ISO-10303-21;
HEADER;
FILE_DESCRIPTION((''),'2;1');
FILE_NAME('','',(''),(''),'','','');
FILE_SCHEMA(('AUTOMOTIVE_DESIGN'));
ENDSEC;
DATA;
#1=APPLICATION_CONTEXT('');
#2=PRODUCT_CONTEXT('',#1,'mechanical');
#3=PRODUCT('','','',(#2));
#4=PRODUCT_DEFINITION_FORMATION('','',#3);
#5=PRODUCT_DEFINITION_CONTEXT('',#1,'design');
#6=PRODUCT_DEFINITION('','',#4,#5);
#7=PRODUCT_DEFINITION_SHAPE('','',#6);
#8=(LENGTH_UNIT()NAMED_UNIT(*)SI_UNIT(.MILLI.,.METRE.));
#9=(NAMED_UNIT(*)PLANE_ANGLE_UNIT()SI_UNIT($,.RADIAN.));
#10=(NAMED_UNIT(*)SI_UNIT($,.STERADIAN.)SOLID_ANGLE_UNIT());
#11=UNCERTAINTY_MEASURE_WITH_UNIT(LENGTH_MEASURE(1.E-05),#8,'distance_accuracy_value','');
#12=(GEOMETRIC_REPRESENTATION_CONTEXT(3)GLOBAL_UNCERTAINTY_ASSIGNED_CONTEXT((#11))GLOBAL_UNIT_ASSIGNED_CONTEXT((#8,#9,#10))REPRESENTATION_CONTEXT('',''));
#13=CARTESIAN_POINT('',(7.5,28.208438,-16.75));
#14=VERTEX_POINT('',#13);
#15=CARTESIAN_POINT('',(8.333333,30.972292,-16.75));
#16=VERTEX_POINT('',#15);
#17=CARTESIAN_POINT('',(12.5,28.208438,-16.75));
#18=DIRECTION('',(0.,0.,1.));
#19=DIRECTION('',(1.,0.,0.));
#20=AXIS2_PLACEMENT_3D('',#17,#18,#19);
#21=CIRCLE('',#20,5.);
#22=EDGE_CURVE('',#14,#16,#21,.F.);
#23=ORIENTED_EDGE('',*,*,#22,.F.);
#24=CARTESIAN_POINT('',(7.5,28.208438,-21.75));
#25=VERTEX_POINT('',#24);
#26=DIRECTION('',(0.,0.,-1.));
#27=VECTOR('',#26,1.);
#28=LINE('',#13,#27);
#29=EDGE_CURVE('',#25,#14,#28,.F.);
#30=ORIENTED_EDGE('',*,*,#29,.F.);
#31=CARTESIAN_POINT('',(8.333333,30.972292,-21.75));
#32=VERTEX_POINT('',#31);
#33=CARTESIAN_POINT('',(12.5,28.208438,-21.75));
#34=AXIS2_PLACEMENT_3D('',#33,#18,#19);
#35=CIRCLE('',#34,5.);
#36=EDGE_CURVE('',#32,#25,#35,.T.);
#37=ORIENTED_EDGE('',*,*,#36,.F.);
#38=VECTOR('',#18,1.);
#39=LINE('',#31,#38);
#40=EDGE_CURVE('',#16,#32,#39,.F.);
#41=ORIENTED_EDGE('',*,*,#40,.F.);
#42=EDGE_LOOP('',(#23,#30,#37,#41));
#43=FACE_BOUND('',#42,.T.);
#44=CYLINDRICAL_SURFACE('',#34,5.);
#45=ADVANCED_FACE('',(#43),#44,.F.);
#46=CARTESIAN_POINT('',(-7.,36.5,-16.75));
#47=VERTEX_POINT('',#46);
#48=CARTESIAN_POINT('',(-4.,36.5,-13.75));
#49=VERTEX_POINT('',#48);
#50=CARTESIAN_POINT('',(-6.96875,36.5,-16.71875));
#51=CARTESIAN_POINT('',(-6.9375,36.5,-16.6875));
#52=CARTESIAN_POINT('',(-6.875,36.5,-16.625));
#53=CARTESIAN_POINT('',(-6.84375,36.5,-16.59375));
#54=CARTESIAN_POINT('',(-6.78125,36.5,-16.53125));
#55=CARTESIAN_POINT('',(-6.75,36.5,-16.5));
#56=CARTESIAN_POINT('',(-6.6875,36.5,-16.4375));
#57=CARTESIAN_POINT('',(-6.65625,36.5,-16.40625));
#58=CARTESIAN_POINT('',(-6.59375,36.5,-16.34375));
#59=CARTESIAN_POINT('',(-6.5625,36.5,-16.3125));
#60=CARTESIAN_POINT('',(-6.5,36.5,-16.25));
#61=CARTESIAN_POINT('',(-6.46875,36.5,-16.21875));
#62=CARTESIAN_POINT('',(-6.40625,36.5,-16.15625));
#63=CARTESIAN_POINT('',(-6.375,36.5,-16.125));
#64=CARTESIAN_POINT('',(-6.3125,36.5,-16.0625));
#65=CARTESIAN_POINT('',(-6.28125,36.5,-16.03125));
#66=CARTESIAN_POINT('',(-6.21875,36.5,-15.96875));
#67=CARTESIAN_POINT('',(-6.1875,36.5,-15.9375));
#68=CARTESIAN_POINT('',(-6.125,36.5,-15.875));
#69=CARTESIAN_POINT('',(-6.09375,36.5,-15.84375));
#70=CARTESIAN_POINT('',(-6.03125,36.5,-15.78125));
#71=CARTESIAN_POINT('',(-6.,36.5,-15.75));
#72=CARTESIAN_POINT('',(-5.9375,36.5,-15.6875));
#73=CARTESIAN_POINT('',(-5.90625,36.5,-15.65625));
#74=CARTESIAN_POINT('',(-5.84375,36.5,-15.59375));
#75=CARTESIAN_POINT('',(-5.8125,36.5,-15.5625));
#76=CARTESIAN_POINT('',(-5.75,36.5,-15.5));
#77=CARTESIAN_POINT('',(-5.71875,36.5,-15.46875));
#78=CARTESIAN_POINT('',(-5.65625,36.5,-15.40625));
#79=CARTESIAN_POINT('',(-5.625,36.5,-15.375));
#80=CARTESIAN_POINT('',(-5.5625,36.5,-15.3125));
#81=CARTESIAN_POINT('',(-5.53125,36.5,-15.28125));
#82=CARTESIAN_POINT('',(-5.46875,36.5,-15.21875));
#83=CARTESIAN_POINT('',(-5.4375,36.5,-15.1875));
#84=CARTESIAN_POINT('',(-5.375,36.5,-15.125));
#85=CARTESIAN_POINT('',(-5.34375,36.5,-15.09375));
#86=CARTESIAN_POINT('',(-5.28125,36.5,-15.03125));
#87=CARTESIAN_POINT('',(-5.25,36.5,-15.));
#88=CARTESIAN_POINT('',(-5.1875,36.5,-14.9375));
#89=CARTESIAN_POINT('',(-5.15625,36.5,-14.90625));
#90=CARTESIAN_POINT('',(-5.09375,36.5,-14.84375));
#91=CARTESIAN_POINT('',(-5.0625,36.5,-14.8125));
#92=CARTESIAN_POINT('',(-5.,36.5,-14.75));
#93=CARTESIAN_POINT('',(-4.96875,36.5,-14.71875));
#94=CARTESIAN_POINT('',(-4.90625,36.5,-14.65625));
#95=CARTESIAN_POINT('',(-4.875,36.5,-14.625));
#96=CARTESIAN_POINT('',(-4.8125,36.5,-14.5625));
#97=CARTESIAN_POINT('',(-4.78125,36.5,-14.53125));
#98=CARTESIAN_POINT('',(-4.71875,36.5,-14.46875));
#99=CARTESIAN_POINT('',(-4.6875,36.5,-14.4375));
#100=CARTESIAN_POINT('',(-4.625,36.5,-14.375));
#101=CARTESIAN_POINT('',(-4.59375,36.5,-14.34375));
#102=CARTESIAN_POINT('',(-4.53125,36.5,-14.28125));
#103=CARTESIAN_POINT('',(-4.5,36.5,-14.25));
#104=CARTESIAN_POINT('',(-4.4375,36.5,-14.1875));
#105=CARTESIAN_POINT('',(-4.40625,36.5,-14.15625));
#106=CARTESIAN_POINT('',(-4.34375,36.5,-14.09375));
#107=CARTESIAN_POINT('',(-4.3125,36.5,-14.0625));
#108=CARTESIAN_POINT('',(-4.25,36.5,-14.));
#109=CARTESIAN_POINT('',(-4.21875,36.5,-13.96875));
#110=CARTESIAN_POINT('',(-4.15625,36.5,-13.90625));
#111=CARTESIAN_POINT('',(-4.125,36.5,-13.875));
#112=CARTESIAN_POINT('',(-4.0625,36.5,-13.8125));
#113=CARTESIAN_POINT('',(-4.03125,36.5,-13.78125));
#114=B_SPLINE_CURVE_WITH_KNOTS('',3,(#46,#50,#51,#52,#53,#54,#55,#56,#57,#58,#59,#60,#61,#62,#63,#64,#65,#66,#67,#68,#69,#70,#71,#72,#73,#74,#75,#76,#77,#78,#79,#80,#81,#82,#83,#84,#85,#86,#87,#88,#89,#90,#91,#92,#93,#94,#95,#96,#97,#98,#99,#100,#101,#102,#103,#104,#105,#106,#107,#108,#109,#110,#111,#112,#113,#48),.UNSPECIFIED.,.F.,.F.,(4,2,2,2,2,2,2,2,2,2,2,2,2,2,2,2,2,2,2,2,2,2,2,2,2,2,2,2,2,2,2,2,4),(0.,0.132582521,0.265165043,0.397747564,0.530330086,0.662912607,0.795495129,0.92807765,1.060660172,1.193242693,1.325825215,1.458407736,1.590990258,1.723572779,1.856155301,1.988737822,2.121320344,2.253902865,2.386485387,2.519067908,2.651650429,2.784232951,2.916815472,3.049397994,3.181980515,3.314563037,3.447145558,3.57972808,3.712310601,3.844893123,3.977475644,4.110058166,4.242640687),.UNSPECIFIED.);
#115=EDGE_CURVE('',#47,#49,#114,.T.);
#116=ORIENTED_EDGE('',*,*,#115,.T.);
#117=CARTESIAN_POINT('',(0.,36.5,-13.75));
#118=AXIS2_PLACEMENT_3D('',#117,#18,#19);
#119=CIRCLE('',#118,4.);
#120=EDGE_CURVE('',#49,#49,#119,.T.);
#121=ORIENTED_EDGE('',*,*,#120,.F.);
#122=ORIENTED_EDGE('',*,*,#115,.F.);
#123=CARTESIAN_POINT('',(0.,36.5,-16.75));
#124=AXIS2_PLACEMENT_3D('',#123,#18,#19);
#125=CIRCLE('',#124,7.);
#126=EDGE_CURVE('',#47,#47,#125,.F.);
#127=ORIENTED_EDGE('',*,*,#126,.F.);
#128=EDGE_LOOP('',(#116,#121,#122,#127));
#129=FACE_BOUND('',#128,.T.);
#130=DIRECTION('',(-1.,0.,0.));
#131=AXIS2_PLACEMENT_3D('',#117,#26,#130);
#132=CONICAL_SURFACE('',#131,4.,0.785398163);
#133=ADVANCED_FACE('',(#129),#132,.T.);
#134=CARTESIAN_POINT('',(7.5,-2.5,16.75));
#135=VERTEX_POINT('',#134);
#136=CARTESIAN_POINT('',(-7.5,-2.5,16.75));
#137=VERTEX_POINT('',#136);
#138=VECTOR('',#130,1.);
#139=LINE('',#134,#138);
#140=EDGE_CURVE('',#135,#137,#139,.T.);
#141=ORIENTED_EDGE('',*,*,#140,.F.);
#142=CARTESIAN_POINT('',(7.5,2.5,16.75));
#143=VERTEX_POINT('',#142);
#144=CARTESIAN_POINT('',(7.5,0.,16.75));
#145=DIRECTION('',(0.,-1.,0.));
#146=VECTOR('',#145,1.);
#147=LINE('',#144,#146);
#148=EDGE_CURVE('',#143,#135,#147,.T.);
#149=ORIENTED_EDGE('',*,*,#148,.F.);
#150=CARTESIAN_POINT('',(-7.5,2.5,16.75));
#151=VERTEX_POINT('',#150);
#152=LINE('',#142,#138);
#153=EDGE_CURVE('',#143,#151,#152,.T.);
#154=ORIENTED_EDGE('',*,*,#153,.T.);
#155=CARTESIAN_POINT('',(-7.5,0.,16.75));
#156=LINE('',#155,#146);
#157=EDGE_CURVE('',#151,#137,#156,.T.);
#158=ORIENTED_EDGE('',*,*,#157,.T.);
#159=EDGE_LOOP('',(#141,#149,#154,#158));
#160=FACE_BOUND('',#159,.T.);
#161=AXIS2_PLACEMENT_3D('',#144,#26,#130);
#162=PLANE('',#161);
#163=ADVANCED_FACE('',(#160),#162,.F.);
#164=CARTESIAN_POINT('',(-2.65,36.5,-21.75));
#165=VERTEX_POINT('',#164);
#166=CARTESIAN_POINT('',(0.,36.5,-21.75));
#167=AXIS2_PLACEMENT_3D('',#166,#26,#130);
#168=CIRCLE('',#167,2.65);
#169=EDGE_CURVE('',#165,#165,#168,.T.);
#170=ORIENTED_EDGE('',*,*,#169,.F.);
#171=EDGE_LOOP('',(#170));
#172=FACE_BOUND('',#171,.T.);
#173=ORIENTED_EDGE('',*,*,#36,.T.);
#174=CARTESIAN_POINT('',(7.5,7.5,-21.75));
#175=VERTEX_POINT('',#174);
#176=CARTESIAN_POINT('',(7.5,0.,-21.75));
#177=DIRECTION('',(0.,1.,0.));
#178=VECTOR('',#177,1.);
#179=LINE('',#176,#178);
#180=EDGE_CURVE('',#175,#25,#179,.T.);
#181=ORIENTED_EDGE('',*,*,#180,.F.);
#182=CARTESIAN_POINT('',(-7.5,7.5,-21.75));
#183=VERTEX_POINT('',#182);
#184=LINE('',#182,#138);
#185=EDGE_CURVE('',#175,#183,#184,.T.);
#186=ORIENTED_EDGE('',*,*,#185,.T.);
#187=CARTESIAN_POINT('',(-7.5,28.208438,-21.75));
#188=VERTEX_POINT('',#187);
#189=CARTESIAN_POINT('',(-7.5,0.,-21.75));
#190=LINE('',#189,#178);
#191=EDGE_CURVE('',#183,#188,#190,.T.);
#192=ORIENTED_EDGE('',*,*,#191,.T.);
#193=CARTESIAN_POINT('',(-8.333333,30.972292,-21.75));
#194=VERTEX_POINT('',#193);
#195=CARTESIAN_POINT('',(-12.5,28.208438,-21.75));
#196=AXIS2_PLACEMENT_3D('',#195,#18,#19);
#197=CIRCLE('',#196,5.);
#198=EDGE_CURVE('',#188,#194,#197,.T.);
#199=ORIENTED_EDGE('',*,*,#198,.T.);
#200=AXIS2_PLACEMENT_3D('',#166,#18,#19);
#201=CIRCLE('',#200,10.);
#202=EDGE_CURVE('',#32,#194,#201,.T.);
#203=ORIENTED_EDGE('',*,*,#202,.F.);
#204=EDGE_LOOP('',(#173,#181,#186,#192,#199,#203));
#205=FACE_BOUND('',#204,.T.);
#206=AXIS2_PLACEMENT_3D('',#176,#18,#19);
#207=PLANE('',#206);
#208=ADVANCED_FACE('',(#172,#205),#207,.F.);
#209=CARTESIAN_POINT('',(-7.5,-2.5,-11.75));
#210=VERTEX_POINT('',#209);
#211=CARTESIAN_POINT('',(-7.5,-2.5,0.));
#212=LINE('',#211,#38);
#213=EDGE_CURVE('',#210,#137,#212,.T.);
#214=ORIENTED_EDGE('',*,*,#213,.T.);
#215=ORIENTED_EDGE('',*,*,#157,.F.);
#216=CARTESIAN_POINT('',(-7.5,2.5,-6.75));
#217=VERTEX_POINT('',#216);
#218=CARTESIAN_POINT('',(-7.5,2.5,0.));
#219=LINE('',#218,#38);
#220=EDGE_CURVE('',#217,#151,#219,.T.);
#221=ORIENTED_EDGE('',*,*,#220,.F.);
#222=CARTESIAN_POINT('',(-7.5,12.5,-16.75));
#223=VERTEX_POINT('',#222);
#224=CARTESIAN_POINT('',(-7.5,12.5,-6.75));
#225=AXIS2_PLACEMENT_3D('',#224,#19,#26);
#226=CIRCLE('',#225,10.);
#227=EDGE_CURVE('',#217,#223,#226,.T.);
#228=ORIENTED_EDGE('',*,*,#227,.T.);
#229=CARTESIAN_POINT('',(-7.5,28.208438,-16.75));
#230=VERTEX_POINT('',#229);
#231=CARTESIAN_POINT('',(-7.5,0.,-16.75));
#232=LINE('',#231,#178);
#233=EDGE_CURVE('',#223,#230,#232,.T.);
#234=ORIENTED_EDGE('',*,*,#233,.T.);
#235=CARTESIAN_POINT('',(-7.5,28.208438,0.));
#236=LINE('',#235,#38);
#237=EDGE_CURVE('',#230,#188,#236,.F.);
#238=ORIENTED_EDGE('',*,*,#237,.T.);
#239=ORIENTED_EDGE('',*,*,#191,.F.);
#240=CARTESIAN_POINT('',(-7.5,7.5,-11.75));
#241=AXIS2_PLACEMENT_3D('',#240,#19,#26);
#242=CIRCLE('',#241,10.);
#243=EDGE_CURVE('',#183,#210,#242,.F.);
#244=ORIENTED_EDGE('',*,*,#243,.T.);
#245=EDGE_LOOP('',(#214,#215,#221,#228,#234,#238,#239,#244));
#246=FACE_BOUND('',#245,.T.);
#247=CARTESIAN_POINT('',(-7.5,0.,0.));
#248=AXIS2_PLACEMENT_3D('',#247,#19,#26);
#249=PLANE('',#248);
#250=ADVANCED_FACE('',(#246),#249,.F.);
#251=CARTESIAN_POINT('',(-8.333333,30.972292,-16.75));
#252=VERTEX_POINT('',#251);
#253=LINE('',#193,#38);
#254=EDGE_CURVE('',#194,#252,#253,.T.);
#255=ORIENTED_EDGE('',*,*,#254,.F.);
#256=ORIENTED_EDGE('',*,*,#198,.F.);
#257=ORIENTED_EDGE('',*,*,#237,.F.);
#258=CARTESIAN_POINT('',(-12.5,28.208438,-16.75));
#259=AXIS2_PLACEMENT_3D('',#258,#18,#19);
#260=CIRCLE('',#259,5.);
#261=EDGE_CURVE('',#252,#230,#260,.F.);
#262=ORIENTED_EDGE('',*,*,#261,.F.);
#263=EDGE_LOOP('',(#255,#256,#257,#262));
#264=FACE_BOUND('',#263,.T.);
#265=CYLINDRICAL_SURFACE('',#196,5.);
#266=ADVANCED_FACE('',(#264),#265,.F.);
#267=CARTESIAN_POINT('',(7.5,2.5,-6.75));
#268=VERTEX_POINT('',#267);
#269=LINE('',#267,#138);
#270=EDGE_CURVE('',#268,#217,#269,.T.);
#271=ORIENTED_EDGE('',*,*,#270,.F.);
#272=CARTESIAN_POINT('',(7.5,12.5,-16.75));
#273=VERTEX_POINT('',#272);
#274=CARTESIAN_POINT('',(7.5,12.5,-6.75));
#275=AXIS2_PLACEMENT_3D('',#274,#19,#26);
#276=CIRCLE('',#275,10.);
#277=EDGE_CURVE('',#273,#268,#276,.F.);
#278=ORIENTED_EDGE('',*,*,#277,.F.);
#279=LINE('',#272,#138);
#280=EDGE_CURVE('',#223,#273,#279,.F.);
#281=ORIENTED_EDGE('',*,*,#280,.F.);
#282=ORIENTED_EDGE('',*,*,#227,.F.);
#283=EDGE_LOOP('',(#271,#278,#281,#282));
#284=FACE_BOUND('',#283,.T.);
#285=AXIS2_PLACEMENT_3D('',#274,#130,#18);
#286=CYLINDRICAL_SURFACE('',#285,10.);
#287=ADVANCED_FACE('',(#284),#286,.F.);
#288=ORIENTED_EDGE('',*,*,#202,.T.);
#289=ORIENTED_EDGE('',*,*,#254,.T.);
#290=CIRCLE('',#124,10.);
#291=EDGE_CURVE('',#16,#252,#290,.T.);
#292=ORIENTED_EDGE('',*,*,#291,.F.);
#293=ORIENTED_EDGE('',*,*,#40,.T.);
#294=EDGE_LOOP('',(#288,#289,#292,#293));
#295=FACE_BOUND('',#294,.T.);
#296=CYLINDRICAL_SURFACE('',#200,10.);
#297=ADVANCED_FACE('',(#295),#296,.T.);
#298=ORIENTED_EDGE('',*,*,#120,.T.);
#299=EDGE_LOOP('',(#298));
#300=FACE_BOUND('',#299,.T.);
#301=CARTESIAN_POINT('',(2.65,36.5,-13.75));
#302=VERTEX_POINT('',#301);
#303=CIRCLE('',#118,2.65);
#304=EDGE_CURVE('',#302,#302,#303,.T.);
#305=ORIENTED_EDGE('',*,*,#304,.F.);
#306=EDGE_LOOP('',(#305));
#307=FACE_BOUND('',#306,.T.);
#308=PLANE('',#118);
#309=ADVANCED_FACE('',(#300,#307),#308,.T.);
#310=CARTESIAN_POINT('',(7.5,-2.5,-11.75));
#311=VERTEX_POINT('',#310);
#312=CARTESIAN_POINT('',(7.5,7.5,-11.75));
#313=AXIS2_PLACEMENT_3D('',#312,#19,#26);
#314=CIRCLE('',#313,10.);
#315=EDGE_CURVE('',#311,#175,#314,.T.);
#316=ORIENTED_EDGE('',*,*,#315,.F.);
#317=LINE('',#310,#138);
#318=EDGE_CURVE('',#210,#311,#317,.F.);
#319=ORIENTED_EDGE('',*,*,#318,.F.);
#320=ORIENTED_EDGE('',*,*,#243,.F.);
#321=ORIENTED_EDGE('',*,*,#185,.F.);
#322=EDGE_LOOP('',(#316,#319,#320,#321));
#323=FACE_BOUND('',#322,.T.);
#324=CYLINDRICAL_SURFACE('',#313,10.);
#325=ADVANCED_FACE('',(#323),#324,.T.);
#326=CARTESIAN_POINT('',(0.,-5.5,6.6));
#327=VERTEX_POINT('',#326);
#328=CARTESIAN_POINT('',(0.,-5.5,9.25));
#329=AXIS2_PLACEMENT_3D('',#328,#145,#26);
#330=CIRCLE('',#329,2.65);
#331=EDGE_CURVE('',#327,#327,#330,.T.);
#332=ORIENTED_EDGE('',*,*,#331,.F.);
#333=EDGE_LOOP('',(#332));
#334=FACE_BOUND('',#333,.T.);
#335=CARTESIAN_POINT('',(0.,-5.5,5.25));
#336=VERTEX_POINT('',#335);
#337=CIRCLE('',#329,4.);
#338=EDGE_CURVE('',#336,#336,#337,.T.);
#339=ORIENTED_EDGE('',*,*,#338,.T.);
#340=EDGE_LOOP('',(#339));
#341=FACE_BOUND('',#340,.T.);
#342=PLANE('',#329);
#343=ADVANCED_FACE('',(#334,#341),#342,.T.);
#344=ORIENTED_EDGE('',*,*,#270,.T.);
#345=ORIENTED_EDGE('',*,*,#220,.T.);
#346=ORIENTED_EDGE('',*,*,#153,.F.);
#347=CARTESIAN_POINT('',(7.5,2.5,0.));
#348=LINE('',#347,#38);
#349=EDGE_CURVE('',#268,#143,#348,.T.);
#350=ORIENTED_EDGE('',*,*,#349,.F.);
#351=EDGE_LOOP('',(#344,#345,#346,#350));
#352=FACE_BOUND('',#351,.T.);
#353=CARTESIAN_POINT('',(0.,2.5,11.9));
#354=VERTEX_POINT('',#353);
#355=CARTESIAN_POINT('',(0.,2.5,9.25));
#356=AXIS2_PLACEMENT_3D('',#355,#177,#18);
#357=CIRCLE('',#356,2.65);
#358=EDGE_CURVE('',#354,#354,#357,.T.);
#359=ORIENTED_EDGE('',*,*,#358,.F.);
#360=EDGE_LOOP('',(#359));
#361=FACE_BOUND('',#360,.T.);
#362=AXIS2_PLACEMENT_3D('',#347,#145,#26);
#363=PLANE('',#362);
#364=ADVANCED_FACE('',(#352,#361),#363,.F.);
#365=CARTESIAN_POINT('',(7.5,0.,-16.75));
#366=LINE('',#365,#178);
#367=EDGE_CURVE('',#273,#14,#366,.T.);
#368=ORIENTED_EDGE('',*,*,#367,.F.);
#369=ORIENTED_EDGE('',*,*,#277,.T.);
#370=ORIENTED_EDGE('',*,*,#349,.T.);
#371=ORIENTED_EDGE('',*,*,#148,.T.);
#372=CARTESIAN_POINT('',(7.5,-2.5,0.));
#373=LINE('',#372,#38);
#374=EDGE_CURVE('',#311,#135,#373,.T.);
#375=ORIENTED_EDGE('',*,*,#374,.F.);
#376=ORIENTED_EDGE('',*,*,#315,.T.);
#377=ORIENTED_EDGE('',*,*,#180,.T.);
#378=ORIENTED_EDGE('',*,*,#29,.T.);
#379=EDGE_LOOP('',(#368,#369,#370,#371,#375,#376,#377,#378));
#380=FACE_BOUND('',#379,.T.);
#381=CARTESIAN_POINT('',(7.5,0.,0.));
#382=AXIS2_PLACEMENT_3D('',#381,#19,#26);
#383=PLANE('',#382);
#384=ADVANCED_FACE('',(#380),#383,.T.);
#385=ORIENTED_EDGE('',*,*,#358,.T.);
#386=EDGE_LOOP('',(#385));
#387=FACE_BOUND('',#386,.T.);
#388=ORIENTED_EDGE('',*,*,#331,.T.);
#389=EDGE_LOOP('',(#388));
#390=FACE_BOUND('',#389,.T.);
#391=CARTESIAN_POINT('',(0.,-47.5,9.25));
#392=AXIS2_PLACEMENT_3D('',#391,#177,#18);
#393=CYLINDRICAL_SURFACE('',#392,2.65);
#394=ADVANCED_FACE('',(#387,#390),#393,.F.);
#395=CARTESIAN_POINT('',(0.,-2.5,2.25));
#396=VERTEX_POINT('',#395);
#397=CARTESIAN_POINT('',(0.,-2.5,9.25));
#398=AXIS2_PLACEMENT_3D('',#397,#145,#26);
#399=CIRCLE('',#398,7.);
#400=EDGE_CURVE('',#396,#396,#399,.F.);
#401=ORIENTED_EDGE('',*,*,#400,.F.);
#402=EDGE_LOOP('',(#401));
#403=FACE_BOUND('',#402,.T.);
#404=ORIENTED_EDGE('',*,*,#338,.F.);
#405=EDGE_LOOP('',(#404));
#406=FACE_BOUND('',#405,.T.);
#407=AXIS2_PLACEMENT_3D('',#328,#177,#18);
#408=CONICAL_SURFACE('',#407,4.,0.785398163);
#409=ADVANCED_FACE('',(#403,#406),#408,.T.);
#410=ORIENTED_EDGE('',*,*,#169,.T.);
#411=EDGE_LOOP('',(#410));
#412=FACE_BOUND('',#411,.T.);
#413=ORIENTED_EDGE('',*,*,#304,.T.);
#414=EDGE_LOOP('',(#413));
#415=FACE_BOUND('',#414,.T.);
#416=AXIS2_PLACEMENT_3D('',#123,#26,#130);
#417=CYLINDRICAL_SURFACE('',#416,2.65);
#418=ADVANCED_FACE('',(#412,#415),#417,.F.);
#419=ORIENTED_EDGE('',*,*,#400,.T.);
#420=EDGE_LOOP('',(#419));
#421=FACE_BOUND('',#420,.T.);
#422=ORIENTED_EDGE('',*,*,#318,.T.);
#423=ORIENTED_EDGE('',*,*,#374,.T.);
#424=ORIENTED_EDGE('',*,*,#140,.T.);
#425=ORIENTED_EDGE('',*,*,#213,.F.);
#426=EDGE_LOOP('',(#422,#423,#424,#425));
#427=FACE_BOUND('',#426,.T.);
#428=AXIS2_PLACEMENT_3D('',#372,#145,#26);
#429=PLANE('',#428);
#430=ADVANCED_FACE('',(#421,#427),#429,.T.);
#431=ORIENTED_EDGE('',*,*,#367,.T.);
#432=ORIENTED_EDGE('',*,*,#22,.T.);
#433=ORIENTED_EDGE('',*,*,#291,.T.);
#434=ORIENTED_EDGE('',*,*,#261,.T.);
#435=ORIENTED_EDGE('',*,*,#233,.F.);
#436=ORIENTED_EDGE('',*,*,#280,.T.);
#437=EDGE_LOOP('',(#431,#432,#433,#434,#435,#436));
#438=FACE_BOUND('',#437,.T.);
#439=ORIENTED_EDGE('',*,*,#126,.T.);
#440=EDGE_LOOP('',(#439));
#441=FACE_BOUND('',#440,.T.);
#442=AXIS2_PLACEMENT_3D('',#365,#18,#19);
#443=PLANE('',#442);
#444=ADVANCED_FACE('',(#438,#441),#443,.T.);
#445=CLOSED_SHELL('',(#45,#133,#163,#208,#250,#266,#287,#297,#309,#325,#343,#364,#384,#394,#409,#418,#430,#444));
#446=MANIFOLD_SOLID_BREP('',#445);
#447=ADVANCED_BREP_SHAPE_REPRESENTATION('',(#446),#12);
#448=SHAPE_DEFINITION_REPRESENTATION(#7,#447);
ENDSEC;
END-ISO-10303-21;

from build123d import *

# Parameters (mm, degrees)
BOSS_EXTRUDE5_DEPTH      = 7.5
BOSS_EXTRUDE5_DEPTH_BACK = 7.5
SKETCH8_W                = 33.5
SKETCH8_H                = 5
SKETCH9_R                = 10
BOSS_EXTRUDE6_DEPTH      = 5
SKETCH11_R               = 2.65
CUT_EXTRUDE7_DEPTH       = 5
SKETCH12_R               = 4
SKETCH12_R_2             = 2.65
BOSS_EXTRUDE7_DEPTH      = 3
CHAMFER1_SIZE            = 3
FILLET1_R                = 10
FILLET2_R                = 5
SKETCH13_R               = 2.65
CUT_EXTRUDE8_DEPTH       = 50
SKETCH14_R               = 4
SKETCH14_R_2             = 2.65
BOSS_EXTRUDE8_DEPTH      = 3
CHAMFER2_SIZE            = 3


with BuildPart() as part:
    # Sketch8 → Boss-Extrude5 (new, two sides: drawn at the far end of the back side and taken through both)
    with BuildSketch(Plane.ZY.offset(-BOSS_EXTRUDE5_DEPTH_BACK)):
        Rectangle(SKETCH8_W, SKETCH8_H)
        Polygon((-16.75, -2.5), (-16.75, 2.5), (-16.75, 41.5), (-21.75, 41.5), (-21.75, -2.5), align=None)
    extrude(amount=BOSS_EXTRUDE5_DEPTH + BOSS_EXTRUDE5_DEPTH_BACK)

    # Sketch9 → Boss-Extrude6 (add)
    with BuildSketch(Plane.XY.offset(-16.75)):
        with Locations((0, 36.5)):
            Circle(SKETCH9_R)
    extrude(amount=-BOSS_EXTRUDE6_DEPTH)

    # Sketch11 → Cut-Extrude7 (cut)
    with BuildSketch(Plane(origin=(0, 0, -21.75), x_dir=(-1, 0, 0), z_dir=(0, 0, -1))):
        with Locations((0, 36.5)):
            Circle(SKETCH11_R)
    extrude(amount=-CUT_EXTRUDE7_DEPTH, mode=Mode.SUBTRACT)

    # Sketch12 → Boss-Extrude7 (add)
    with BuildSketch(Plane.XY.offset(-16.75)):
        with Locations((0, 36.5)):
            Circle(SKETCH12_R)
        with Locations(Location((0, 36.5, 0), (0, 0, 180))):
            Circle(SKETCH12_R_2, mode=Mode.SUBTRACT)
    extrude(amount=BOSS_EXTRUDE7_DEPTH)

    # Chamfer1
    chamfer1_edges = [part.edges().sort_by_distance(p)[0] for p in [
        (-4, 36.5, -16.75),
    ]]
    chamfer(chamfer1_edges, length=CHAMFER1_SIZE - 0.0001)  # a hair under: the kernel refuses the full size

    # Fillet1
    fillet1_edges = [part.edges().sort_by_distance(p)[0] for p in [
        (0, -2.5, -21.75),
        (0, 2.5, -16.75),
    ]]
    fillet(fillet1_edges, radius=FILLET1_R)

    # Fillet2
    fillet2_edges = [part.edges().sort_by_distance(p)[0] for p in [
        (-7.5, 29.885621722, -19.25),
        (7.5, 29.885621722, -19.25),
    ]]
    fillet(fillet2_edges, radius=FILLET2_R)

    # Sketch13 → Cut-Extrude8 (cut)
    with BuildSketch(Plane(origin=(0, 2.5, 0), x_dir=(1, 0, 0), z_dir=(0, 1, 0))):
        with Locations(Location((0, -9.25, 0), (0, 0, 270))):
            Circle(SKETCH13_R)
    extrude(amount=-CUT_EXTRUDE8_DEPTH, mode=Mode.SUBTRACT)

    # Sketch14 → Boss-Extrude8 (add)
    with BuildSketch(Plane.XZ.offset(2.5)):
        with Locations(Location((0, 9.25, 0), (0, 0, 270))):
            Circle(SKETCH14_R)
        with Locations(Location((0, 9.25, 0), (0, 0, 90))):
            Circle(SKETCH14_R_2, mode=Mode.SUBTRACT)
    extrude(amount=BOSS_EXTRUDE8_DEPTH)

    # Chamfer2
    chamfer2_edges = [part.edges().sort_by_distance(p)[0] for p in [
        (0, -2.5, 13.25),
    ]]
    chamfer(chamfer2_edges, length=CHAMFER2_SIZE - 0.0001)  # a hair under: the kernel refuses the full size


solid = part.part
